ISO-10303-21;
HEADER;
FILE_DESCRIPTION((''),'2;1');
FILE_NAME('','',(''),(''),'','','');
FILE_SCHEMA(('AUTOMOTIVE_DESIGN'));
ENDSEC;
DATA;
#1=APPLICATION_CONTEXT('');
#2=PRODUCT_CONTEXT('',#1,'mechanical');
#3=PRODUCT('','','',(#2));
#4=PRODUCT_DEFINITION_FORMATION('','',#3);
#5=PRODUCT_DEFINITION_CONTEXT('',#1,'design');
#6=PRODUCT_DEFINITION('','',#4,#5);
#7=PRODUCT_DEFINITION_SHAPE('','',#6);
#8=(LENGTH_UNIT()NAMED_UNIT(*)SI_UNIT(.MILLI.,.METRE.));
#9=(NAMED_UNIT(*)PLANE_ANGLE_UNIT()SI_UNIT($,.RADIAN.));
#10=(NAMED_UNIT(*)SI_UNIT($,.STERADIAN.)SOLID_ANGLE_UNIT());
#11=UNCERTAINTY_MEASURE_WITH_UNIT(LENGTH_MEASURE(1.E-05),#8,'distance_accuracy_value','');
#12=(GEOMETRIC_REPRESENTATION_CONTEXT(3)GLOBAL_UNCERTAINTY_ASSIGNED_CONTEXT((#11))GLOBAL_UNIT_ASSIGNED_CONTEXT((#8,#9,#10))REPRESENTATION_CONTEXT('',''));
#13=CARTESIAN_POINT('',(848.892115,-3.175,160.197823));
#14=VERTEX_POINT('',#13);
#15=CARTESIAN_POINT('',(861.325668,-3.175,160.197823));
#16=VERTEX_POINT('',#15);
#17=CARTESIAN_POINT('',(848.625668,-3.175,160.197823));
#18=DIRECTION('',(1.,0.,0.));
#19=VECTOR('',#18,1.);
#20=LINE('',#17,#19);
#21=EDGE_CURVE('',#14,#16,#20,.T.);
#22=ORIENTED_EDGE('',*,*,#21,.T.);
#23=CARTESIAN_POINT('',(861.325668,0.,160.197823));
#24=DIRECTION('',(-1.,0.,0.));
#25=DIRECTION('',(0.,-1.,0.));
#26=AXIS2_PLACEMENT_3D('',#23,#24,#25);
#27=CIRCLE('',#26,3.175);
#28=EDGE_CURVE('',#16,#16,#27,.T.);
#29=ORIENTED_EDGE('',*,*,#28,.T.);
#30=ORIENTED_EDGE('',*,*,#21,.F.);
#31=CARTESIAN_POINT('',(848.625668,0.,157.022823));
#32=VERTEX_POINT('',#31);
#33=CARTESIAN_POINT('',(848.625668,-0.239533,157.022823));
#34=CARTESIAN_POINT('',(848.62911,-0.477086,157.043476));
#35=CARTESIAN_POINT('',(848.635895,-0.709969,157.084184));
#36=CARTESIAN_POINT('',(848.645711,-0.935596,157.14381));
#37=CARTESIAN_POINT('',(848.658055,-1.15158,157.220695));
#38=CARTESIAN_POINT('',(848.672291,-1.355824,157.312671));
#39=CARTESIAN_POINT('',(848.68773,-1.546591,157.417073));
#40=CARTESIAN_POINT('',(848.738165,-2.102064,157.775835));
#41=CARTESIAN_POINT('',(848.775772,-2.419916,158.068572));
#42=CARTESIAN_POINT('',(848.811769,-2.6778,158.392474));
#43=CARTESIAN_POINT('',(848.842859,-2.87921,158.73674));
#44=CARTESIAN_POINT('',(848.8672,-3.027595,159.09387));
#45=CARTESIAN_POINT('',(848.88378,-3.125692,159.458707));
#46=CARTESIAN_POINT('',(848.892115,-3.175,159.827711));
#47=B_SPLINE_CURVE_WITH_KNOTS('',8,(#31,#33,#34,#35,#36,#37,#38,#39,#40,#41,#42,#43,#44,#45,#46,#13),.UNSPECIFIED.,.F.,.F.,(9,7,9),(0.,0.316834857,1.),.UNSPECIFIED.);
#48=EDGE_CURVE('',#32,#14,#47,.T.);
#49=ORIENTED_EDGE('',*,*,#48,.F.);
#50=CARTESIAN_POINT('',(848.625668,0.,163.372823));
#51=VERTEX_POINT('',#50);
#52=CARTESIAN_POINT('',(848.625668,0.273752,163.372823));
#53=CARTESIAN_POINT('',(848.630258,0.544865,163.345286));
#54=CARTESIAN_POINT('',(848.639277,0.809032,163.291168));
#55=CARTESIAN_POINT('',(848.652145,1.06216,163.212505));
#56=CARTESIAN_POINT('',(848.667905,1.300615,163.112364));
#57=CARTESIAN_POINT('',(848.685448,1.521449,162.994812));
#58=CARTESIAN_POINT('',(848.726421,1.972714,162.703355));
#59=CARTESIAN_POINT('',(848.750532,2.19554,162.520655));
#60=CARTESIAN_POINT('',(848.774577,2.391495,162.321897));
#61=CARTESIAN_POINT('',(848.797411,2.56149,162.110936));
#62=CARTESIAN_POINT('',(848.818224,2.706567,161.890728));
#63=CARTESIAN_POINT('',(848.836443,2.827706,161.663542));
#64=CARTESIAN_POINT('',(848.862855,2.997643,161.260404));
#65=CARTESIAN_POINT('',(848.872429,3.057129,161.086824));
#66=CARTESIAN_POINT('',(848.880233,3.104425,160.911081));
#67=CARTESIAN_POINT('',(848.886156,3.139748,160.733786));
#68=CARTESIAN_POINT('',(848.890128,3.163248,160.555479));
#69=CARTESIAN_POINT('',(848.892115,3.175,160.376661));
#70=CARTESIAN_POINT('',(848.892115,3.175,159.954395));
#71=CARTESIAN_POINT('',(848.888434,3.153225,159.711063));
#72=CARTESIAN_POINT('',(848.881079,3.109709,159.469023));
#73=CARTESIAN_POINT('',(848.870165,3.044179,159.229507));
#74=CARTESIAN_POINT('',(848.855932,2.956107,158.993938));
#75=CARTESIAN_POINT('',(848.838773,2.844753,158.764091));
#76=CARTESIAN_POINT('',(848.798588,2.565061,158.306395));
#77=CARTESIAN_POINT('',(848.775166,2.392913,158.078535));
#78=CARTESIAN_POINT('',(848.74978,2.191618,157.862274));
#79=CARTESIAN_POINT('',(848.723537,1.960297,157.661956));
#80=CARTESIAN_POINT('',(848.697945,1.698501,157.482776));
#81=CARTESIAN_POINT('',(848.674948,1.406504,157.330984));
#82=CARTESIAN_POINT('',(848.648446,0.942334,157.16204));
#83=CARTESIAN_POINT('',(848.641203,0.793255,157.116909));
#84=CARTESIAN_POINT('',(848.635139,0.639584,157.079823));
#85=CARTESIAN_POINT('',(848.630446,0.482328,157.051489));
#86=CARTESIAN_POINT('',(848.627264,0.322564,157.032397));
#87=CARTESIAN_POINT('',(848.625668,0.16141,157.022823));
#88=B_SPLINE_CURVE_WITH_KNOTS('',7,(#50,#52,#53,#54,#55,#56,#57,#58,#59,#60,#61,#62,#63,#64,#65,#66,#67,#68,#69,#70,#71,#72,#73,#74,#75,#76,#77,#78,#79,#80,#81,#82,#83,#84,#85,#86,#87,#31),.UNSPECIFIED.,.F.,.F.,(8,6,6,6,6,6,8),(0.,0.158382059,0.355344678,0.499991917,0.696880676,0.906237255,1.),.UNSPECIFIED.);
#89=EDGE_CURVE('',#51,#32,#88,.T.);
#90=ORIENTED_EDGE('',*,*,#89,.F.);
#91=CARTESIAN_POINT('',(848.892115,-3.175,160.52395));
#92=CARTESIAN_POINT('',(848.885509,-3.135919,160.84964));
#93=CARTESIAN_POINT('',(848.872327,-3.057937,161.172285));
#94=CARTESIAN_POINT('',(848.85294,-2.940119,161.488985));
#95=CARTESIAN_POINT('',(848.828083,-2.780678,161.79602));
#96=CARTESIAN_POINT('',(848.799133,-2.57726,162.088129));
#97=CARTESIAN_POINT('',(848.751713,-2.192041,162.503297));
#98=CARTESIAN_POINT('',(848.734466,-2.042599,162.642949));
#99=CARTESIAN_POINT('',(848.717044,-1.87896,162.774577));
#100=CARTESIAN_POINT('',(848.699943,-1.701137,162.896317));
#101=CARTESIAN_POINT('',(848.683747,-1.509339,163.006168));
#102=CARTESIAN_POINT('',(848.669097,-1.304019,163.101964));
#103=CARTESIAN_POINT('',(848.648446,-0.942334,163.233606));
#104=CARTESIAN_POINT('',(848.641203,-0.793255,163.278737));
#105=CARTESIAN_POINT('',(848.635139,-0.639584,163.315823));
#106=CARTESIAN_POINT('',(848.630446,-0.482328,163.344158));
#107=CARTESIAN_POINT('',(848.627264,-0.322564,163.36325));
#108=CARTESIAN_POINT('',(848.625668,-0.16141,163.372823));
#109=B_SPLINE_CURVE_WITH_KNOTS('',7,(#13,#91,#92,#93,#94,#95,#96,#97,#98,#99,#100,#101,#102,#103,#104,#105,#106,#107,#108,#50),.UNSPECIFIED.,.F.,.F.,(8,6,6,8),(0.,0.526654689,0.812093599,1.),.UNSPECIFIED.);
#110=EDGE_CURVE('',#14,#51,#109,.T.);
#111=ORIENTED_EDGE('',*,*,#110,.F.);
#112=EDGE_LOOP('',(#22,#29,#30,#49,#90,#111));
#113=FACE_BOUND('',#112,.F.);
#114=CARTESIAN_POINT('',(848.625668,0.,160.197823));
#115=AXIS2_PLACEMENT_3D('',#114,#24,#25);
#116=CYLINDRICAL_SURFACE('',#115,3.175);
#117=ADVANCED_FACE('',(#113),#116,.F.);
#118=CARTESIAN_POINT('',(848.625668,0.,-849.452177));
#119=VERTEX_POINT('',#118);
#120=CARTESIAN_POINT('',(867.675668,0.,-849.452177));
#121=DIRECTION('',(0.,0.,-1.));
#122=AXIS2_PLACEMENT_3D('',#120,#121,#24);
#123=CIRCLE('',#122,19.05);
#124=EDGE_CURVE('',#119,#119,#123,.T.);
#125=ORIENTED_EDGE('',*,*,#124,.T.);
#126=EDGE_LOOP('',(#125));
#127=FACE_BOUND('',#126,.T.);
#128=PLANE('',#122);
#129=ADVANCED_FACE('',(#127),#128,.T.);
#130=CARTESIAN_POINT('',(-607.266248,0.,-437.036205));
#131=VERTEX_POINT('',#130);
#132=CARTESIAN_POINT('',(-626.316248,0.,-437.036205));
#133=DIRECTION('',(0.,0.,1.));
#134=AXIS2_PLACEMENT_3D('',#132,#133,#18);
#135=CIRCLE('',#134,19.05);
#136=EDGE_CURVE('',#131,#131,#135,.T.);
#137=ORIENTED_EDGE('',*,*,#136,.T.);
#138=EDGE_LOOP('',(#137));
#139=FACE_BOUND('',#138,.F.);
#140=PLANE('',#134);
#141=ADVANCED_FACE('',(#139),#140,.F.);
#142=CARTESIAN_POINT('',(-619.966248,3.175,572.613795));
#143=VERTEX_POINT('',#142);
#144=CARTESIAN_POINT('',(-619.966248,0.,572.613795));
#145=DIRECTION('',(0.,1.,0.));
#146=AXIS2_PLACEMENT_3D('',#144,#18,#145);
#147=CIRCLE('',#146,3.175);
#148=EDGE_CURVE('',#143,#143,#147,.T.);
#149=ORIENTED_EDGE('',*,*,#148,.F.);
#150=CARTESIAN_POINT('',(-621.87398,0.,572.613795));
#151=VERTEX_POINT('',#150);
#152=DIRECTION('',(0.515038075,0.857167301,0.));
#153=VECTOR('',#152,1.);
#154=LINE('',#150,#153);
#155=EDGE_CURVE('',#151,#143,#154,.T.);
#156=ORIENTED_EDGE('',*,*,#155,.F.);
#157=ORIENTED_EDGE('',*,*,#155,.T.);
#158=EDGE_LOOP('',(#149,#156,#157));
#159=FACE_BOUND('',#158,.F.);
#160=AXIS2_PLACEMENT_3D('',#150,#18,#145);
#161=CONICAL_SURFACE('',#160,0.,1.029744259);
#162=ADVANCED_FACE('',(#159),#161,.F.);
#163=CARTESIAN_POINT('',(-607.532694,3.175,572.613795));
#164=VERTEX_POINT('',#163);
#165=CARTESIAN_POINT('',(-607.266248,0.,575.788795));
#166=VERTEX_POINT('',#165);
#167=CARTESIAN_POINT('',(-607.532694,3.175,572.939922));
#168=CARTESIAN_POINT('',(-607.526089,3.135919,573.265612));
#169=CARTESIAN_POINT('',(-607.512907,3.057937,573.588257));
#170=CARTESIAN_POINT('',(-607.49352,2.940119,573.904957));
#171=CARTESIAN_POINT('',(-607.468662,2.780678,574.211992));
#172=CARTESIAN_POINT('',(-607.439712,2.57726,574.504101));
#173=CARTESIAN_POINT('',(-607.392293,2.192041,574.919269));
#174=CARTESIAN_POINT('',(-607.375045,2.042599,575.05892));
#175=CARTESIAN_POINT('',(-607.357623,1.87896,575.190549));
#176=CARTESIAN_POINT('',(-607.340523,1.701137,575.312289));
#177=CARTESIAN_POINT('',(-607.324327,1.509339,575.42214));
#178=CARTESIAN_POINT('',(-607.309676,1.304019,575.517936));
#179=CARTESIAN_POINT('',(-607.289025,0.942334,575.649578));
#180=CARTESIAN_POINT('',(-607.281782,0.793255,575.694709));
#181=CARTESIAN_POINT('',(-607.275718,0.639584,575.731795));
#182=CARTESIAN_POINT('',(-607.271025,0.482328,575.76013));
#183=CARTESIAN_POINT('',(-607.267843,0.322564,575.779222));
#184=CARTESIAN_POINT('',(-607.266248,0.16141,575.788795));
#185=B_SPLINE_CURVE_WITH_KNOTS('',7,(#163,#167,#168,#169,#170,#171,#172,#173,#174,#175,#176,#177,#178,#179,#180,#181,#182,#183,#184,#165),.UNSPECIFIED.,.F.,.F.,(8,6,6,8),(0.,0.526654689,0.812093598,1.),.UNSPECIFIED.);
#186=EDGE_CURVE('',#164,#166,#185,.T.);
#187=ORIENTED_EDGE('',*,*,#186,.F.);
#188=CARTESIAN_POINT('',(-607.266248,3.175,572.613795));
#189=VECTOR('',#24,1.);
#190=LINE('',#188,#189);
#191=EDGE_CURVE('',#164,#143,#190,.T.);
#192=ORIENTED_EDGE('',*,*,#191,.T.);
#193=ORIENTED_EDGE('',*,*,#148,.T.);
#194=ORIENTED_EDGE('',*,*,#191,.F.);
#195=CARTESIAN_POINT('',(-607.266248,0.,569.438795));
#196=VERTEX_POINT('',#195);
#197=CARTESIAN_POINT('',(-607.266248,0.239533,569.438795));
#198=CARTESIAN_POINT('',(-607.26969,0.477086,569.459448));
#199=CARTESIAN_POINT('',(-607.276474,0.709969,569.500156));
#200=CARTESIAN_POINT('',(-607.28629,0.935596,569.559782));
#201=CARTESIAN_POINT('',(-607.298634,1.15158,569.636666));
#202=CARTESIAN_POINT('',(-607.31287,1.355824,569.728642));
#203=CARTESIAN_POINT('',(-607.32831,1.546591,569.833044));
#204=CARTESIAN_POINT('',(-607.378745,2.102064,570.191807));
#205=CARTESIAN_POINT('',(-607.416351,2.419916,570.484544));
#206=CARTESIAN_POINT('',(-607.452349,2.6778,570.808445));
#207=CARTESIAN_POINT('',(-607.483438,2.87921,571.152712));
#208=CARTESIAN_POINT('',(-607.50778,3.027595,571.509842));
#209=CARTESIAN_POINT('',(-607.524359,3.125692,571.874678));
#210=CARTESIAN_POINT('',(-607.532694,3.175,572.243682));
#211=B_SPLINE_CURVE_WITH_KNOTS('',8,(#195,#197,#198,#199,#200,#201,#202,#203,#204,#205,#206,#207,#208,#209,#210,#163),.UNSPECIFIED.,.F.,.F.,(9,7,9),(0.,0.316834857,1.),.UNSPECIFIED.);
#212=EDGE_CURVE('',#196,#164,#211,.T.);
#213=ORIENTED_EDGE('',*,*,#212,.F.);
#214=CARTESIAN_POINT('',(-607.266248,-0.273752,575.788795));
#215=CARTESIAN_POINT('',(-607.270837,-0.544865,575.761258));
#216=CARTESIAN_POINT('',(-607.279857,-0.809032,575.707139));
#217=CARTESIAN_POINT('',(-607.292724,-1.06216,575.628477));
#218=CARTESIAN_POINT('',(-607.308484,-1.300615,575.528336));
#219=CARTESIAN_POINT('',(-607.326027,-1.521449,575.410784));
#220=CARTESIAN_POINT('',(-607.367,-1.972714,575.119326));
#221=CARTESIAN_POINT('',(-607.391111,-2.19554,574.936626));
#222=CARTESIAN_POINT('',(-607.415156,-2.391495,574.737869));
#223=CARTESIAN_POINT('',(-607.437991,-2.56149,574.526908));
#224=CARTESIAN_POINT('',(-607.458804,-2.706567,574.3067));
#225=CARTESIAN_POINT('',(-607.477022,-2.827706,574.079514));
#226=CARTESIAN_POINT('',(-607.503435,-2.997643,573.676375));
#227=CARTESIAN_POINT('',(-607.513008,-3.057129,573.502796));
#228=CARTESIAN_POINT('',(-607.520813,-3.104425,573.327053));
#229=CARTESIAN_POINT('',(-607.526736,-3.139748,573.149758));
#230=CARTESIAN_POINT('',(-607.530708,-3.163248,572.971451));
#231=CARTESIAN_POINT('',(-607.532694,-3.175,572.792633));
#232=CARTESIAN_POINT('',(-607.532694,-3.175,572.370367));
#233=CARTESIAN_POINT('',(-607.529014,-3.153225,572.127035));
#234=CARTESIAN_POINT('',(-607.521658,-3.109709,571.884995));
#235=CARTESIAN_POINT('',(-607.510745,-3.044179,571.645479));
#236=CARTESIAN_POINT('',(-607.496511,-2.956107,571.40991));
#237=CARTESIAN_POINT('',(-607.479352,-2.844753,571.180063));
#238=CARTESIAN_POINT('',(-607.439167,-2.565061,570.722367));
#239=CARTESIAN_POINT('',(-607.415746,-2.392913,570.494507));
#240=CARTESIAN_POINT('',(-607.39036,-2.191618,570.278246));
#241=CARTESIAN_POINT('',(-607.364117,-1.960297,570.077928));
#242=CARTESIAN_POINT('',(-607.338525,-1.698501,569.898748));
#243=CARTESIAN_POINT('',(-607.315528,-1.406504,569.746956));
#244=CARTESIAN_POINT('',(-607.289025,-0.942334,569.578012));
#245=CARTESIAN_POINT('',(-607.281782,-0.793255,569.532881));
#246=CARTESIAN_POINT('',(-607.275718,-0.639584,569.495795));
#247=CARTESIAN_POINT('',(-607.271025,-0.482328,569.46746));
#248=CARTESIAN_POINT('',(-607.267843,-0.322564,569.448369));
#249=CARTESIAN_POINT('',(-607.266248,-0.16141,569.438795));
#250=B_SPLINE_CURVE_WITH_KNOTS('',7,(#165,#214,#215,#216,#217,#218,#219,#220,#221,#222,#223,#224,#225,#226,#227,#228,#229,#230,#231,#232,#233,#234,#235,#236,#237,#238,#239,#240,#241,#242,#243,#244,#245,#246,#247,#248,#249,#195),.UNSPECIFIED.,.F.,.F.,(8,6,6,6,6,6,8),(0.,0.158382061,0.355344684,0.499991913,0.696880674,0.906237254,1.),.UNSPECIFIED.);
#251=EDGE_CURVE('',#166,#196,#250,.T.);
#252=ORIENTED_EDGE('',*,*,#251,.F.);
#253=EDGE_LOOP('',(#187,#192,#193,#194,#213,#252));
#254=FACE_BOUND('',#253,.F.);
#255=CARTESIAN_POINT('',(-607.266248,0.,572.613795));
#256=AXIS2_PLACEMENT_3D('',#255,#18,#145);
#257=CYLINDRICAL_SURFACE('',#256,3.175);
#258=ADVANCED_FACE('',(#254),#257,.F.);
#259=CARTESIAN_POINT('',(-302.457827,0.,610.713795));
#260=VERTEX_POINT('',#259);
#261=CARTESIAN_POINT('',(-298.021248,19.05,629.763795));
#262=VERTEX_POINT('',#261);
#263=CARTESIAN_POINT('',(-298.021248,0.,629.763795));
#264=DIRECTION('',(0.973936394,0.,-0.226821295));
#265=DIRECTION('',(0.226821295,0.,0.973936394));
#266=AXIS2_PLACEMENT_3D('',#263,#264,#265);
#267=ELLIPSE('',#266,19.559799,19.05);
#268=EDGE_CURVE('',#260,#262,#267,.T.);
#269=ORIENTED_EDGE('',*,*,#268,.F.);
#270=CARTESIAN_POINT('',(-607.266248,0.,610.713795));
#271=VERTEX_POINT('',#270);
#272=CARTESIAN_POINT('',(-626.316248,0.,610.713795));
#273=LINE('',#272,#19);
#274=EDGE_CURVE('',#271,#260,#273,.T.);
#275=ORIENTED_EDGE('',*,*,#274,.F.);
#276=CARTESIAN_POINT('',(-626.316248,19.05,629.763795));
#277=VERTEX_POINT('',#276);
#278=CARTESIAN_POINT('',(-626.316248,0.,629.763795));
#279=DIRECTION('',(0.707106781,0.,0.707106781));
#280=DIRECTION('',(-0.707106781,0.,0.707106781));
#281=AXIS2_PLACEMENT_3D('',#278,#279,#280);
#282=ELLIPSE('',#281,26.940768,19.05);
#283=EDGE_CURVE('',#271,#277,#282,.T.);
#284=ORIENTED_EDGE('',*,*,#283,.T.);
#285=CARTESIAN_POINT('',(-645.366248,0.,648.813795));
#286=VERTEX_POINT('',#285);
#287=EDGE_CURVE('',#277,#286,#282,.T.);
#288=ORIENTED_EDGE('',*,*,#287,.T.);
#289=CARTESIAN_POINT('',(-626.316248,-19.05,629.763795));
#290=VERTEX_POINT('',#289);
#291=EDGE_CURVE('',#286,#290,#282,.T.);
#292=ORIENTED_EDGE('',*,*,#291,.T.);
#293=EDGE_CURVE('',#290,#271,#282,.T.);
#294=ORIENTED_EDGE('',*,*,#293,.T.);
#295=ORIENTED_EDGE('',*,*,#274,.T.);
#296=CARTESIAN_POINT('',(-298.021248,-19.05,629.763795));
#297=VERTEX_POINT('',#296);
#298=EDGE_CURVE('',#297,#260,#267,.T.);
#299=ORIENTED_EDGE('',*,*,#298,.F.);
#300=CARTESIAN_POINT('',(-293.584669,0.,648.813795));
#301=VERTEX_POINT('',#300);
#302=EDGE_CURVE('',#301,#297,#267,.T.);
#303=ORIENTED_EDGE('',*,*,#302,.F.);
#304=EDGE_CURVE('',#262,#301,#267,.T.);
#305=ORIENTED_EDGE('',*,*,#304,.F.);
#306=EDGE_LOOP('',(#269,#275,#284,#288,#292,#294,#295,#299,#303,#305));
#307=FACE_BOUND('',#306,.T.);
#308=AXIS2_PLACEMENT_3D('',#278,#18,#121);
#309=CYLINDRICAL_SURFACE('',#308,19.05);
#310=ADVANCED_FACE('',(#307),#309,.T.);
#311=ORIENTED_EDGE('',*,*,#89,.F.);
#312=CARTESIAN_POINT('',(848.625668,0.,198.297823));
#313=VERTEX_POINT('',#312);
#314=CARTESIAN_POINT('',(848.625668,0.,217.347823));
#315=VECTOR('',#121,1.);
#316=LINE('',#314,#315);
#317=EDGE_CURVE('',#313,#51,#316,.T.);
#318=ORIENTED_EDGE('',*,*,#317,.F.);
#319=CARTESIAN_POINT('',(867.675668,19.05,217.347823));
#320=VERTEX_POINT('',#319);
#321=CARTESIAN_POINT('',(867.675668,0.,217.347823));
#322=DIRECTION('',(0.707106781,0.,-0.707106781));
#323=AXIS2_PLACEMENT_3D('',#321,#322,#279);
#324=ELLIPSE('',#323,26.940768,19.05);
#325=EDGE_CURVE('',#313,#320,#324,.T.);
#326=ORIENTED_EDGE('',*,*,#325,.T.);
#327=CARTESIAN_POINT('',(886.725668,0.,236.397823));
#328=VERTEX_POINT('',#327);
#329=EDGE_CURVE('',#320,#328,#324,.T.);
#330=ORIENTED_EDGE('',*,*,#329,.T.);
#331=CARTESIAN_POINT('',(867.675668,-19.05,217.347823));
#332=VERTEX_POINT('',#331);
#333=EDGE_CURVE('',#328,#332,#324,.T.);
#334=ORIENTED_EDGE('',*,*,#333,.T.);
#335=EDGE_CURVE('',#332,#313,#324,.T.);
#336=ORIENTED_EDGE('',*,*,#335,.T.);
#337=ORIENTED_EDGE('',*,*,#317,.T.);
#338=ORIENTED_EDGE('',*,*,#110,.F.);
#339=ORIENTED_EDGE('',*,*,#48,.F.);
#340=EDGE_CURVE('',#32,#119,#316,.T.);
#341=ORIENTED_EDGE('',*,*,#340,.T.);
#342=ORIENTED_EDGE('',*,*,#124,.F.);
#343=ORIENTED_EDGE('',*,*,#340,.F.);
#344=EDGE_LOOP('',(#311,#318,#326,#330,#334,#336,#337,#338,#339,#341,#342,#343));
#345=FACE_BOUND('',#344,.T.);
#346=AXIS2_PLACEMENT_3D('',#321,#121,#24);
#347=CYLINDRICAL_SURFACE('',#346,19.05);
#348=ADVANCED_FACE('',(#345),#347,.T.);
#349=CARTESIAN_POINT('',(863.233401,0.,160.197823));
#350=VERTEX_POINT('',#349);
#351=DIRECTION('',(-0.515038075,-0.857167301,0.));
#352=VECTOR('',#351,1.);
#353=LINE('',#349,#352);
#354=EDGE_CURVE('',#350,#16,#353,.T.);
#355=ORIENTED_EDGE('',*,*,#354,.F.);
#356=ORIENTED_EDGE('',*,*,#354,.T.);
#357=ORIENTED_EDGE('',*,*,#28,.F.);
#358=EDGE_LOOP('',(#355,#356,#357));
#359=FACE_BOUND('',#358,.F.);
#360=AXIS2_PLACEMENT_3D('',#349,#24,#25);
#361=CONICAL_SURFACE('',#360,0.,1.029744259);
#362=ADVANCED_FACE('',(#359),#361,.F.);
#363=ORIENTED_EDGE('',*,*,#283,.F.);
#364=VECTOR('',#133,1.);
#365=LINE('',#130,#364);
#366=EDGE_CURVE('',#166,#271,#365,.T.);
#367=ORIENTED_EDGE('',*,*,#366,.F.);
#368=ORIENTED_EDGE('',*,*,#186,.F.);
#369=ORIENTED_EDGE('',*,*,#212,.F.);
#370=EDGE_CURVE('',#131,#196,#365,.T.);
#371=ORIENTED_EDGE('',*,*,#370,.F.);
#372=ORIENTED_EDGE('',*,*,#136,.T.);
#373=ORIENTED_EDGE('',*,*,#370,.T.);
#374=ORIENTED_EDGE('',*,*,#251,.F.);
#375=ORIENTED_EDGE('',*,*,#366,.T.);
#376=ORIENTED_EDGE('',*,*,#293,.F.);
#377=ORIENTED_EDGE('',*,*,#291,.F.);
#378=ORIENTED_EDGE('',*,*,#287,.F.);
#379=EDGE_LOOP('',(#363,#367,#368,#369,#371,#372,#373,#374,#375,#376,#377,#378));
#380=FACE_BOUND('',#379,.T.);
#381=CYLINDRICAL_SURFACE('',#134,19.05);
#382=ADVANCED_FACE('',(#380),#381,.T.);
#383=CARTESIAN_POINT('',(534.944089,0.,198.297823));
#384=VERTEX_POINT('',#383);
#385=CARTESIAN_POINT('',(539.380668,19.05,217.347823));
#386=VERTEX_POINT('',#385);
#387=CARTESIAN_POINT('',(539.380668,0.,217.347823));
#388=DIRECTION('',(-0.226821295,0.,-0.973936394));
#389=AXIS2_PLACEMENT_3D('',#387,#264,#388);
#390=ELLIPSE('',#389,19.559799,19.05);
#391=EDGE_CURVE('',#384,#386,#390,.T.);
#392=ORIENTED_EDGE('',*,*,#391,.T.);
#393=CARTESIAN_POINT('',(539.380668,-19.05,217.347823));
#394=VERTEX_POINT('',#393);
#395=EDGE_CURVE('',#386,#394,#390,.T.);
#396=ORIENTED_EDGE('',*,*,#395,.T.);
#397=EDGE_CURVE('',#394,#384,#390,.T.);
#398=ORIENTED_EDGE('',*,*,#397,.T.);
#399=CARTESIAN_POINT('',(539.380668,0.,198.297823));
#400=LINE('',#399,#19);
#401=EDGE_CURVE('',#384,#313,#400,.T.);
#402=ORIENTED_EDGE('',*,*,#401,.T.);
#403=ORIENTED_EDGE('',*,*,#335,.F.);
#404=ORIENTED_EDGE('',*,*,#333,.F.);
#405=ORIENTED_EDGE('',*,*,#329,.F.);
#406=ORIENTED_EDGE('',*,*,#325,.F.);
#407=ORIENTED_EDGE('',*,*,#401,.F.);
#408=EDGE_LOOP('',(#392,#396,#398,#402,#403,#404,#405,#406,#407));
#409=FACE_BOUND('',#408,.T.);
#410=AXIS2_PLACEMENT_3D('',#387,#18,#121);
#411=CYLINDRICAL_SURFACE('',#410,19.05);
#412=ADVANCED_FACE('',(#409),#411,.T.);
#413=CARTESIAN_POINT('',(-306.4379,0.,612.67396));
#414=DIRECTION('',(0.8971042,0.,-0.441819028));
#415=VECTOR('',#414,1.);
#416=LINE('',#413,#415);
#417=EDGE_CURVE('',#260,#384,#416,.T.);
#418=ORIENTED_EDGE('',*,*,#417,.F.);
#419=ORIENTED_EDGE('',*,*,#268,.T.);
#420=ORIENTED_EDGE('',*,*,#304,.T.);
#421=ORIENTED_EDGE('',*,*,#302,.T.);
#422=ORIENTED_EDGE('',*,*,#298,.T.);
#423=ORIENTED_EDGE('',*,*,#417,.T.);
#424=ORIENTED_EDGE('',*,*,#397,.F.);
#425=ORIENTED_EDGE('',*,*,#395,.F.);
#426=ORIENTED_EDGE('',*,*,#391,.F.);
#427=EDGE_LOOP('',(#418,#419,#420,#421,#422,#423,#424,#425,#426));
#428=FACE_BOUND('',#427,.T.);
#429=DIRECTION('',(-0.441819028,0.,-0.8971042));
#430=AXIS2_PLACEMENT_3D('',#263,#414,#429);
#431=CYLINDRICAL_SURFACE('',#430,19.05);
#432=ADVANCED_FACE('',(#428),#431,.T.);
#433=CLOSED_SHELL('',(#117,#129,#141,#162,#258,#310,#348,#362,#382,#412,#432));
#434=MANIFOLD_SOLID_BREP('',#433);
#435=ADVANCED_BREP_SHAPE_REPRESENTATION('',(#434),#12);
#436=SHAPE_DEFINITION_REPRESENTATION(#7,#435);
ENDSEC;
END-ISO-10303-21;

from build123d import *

# Parameters (mm, degrees)
F2_R      = 19.05
F9_D      = 6.35
F9_DEPTH  = 12.7
F9_TIP    = 1.9077324654
F15_D     = 6.35
F15_DEPTH = 12.7
F15_TIP   = 1.9077324654


with BuildPart() as f3:
    # F3: sweep along a path in F0
    with BuildLine(Plane.XZ) as f3_path:
        Line((-626.3162476942, -437.036204844), (-626.3162476942, 629.763795156))
        Line((-626.3162476942, 629.763795156), (-298.0212476942, 629.763795156))
        Line((-298.0212476942, 629.763795156), (539.3806681667, 217.3478233358))
        Line((539.3806681667, 217.3478233358), (867.6756681667, 217.3478233358))
        Line((867.6756681667, 217.3478233358), (867.6756681667, -849.4521766642))
    # F2 (on plane+point) → F3 (sweep)
    with BuildSketch(Plane.XY.offset(-437.036204844)):
        with Locations((-626.3162476942, 0)):
            Circle(F2_R)
    sweep(path=f3_path.line, transition=Transition.RIGHT)

    # F9 (one way)
    with BuildSketch(Plane.YZ.offset(-607.2662476942)):
        with Locations((0, 572.613795156)):
            Circle(F9_D / 2)
    extrude(amount=-F9_DEPTH, mode=Mode.SUBTRACT)
    with Locations(Plane.YZ.offset(-607.2662476942)):
        with Locations((0, 572.613795156)):
            with Locations((0, 0, -(F9_DEPTH + F9_TIP / 2))):  # 118° drill point
                Cone(0, F9_D / 2, F9_TIP, mode=Mode.SUBTRACT)

    # F15 (one way)
    with BuildSketch(Plane(origin=(848.6256681667, 0, 0), x_dir=(0, -1, 0), z_dir=(-1, 0, 0))):
        with Locations((0, 160.1978233358)):
            Circle(F15_D / 2)
    extrude(amount=-F15_DEPTH, mode=Mode.SUBTRACT)
    with Locations(Plane(origin=(848.6256681667, 0, 0), x_dir=(0, -1, 0), z_dir=(-1, 0, 0))):
        with Locations((0, 160.1978233358)):
            with Locations((0, 0, -(F15_DEPTH + F15_TIP / 2))):  # 118° drill point
                Cone(0, F15_D / 2, F15_TIP, mode=Mode.SUBTRACT)


solid = f3.part
